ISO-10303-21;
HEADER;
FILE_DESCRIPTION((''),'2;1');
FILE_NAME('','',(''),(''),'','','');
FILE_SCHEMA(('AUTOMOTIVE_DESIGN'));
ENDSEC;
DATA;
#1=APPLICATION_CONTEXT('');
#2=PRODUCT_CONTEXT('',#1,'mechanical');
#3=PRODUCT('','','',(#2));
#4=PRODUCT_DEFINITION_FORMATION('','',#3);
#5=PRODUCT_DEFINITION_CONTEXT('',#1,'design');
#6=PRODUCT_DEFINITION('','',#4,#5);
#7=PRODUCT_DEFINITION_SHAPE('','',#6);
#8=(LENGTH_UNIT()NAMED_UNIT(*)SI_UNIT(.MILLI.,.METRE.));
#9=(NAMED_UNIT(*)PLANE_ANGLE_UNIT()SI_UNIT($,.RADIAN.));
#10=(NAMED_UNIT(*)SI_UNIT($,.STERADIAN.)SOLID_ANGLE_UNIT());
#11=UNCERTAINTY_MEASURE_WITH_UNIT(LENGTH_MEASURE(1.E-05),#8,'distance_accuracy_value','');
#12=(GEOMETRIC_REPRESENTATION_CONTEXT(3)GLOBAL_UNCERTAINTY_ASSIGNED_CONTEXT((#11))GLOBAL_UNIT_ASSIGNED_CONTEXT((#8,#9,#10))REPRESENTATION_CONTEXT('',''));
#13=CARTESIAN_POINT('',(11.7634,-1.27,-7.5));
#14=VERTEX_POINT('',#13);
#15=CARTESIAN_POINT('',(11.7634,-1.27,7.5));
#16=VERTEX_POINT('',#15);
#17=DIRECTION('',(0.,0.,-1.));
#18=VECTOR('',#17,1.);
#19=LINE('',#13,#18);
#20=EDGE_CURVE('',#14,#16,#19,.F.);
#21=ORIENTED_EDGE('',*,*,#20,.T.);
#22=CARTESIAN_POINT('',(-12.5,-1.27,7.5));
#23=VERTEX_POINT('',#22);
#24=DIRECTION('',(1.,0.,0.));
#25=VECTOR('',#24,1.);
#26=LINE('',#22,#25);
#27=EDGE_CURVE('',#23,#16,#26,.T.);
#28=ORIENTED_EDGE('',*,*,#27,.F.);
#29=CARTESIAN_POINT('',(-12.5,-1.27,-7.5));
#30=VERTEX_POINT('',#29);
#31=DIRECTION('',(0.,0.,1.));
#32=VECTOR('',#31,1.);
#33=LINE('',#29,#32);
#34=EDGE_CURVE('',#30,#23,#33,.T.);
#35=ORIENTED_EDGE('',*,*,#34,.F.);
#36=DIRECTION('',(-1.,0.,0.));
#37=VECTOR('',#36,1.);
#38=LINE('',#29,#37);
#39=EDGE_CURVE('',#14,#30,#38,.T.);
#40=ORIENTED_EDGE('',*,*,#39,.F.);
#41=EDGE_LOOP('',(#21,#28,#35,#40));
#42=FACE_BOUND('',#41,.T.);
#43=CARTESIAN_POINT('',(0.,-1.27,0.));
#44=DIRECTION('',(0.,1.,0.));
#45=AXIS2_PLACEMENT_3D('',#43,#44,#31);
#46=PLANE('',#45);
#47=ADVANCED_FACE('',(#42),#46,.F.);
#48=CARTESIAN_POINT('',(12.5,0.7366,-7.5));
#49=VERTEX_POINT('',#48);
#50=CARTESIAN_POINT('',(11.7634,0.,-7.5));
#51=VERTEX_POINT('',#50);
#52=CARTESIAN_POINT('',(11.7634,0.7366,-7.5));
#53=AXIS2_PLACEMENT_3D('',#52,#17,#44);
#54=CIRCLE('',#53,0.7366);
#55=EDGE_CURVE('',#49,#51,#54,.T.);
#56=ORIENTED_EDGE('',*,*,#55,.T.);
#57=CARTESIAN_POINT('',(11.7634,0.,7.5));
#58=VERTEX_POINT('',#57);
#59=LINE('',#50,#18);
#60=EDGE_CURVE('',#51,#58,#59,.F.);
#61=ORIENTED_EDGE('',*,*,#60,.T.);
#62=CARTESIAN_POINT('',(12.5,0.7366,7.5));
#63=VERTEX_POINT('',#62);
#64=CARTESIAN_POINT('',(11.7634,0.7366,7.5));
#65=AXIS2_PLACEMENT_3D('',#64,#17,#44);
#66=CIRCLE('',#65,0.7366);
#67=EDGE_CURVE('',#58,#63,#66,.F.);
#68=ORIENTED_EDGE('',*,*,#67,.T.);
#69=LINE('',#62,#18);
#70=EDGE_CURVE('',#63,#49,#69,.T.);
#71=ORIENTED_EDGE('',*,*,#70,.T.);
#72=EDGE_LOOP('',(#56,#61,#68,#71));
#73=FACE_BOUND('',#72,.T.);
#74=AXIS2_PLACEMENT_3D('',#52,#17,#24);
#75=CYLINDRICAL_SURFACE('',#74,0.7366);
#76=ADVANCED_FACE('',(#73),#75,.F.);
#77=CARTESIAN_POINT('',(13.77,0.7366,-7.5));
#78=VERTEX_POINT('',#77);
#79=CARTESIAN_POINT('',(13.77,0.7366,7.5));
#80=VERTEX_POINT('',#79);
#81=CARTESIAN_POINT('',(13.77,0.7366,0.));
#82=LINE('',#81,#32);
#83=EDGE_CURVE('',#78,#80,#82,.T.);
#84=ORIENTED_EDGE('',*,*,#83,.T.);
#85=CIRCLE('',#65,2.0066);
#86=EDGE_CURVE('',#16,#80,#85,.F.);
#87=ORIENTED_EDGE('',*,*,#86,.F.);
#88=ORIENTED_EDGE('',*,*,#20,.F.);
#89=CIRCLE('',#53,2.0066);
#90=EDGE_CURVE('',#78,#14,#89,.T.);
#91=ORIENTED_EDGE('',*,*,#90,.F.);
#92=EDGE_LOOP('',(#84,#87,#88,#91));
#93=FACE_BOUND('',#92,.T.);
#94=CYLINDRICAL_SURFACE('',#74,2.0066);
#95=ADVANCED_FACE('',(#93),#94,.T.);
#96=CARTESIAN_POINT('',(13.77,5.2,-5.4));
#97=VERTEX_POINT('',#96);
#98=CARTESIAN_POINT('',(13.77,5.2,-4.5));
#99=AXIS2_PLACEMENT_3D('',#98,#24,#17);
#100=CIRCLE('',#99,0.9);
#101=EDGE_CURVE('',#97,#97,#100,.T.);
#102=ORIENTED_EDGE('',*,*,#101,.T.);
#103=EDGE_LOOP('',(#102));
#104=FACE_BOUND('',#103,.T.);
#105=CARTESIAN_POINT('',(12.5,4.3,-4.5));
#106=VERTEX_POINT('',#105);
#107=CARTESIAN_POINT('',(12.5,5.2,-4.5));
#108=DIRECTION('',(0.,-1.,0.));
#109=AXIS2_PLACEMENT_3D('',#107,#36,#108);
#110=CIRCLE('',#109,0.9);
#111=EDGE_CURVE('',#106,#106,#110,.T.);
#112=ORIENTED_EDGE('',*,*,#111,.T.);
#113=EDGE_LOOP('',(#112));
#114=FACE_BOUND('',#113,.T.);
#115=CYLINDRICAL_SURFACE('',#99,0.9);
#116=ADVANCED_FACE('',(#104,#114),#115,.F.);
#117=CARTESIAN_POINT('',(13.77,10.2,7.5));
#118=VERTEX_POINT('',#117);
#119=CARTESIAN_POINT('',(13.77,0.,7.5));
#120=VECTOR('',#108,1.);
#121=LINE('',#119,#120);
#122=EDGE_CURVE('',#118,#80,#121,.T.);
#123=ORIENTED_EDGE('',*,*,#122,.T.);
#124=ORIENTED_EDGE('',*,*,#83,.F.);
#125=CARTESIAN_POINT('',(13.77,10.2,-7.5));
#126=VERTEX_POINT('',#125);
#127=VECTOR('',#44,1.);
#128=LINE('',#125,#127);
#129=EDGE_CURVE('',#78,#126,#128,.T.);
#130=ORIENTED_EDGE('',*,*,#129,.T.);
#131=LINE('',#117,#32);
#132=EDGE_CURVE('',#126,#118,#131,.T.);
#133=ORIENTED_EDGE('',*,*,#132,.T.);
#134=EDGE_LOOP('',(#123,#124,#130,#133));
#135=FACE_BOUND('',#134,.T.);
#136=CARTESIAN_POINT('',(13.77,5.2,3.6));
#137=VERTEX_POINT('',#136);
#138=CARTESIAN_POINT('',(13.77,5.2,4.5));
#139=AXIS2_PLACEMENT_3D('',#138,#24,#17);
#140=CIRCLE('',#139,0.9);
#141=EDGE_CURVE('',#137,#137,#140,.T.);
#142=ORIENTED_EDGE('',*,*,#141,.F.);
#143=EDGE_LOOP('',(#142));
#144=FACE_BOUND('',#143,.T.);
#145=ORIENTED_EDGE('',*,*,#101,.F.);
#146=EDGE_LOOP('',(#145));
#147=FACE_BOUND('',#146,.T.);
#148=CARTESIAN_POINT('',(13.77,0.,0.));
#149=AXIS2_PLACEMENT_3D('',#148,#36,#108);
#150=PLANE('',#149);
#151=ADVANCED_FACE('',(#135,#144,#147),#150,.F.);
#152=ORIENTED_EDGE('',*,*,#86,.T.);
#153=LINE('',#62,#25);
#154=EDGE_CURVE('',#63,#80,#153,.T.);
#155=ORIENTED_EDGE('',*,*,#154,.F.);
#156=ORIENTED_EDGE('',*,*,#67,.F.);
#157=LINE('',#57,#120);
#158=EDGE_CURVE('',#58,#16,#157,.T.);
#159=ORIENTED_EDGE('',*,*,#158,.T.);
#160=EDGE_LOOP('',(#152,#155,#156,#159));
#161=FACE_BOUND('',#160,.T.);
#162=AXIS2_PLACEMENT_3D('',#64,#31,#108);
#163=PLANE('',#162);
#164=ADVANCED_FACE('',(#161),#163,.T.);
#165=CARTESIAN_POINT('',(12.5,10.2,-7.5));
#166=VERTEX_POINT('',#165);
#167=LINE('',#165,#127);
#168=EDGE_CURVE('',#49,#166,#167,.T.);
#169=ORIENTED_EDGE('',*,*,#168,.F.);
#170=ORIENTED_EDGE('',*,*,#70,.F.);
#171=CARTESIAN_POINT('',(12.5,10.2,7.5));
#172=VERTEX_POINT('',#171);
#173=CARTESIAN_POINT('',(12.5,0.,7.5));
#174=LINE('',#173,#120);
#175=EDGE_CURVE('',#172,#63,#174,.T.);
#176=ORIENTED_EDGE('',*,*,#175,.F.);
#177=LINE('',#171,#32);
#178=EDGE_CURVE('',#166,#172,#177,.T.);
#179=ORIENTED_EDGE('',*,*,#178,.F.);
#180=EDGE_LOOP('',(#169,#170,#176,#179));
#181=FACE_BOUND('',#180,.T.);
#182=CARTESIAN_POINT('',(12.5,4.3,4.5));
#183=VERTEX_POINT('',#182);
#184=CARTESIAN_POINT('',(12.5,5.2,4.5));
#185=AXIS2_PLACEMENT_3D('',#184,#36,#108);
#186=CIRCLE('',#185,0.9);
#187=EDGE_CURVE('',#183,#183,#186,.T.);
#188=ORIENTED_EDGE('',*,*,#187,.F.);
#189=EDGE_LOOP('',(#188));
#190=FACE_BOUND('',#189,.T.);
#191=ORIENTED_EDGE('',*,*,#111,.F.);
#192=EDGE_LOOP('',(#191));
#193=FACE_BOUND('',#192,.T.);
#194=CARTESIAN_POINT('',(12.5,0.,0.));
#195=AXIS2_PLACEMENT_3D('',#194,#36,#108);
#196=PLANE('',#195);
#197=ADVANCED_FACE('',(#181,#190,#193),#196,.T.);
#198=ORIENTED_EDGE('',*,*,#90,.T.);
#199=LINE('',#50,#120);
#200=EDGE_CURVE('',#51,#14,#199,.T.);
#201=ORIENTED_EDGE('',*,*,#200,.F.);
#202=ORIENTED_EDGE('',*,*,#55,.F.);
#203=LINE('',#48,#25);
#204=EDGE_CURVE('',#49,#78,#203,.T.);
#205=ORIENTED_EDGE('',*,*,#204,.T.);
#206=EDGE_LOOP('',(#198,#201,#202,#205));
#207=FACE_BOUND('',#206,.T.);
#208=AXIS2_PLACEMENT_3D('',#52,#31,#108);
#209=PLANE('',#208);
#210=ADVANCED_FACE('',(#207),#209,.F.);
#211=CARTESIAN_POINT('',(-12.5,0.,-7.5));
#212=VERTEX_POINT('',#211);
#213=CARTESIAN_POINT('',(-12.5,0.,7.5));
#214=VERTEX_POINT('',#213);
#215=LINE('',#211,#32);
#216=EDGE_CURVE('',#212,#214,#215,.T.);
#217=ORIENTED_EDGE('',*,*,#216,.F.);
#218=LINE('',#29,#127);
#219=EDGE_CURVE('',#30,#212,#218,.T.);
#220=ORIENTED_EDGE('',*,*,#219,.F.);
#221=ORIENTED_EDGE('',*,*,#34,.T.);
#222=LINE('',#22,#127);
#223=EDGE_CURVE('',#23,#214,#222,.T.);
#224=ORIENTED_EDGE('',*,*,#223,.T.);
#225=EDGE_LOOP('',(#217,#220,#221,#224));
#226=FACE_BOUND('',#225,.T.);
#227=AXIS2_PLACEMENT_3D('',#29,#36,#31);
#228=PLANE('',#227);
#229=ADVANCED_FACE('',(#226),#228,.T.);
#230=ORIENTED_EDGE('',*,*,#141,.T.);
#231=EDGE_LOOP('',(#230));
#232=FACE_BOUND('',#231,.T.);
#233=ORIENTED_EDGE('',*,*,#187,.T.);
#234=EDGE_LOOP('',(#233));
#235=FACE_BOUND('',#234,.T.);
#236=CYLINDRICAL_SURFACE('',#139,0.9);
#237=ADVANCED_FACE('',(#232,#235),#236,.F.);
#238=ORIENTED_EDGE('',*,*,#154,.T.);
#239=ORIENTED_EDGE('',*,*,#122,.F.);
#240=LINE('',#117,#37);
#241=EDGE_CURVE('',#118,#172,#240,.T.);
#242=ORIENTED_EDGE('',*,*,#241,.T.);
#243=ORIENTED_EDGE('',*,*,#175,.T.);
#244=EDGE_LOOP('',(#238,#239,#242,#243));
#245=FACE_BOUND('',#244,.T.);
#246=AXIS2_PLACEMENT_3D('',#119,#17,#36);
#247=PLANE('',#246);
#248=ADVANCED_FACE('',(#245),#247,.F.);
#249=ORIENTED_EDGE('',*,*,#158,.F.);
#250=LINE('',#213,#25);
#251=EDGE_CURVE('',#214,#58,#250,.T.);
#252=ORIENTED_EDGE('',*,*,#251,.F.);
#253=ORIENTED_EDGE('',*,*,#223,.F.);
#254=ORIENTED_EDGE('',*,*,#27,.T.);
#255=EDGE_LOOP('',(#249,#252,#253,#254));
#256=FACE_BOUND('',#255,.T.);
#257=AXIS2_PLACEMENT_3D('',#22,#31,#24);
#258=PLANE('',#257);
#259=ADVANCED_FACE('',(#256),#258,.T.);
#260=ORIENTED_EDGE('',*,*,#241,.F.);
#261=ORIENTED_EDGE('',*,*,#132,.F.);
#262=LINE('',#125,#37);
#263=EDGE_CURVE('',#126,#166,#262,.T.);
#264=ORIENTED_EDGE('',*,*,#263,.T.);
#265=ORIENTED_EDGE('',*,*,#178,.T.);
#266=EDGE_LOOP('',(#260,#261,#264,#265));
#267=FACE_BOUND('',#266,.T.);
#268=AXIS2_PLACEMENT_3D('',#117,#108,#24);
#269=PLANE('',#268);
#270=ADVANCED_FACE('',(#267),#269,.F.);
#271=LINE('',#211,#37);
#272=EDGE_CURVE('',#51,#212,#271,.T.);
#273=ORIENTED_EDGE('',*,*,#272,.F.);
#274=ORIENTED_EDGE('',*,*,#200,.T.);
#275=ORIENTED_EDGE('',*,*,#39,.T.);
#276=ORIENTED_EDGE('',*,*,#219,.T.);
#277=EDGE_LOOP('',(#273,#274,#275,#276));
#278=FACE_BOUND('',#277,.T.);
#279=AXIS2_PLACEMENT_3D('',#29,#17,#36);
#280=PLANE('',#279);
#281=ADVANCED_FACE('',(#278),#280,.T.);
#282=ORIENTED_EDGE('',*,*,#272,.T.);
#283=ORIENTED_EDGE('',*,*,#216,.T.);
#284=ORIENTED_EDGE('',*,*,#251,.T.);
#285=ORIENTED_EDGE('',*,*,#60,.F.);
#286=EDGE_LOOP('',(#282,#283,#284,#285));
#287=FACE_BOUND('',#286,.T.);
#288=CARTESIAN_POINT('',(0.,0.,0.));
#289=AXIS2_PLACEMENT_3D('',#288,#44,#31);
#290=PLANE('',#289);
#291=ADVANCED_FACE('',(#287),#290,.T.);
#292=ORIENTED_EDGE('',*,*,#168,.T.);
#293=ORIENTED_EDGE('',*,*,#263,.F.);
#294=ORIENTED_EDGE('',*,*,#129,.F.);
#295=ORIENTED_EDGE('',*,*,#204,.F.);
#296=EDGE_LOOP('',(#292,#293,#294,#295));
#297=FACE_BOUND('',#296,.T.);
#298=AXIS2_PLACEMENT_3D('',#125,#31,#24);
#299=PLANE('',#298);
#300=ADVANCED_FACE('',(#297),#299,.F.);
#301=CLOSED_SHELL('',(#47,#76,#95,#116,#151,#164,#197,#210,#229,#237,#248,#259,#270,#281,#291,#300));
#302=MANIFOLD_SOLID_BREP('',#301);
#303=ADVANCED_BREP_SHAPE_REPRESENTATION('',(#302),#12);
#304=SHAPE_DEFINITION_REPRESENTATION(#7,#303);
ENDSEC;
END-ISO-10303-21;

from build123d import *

# Parameters (mm, degrees)
SKETCH1_W                    = 25
SKETCH1_H                    = 15
BASE_FLANGE1_DEPTH           = 1.27
EDGE_FLANGE1_STRIP_W         = 6.5532
EDGE_FLANGE1_STRIP_H         = 1.27
EDGE_FLANGE1_STRIP_CUT_DEPTH = 15
EDGE_FLANGE1_DEPTH           = 15
M1_6_CLEARANCE_HOLE1_D       = 1.8


# Sheet-metal steps are written as plain solids
with BuildPart() as part:
    # Sketch1 → Base-Flange1 (new body)
    with BuildSketch(Plane(origin=(0, 0, 0), x_dir=(1, 0, 0), z_dir=(0, 1, 0))):
        Rectangle(SKETCH1_W, SKETCH1_H)
    extrude(amount=-BASE_FLANGE1_DEPTH)

    # Edge-Flange1 strip (across the edge) → Edge-Flange1 strip cut (cut)
    with BuildSketch(Plane(origin=(12.5, 0, 7.5), x_dir=(-1, 0, 0), z_dir=(0, 0, -1))):
        with Locations((-2.54, -0.635)):
            Rectangle(EDGE_FLANGE1_STRIP_W, EDGE_FLANGE1_STRIP_H)
    extrude(amount=EDGE_FLANGE1_STRIP_CUT_DEPTH, mode=Mode.SUBTRACT)

    # Edge-Flange1 section (across the edge) → Edge-Flange1 (add)
    with BuildSketch(Plane(origin=(12.5, 0, 7.5), x_dir=(-1, 0, 0), z_dir=(0, 0, -1))):
        with BuildLine():
            Line((-1.27, 0.7366), (-1.27, 10.2))
            Line((-1.27, 10.2), (0, 10.2))
            Line((0, 10.2), (0, 0.7366))
            ThreePointArc((0, 0.7366), (0.215745145, 0.215745145), (0.7366, 0))
            Line((0.7366, 0), (0.7366, -1.27))
            ThreePointArc((0.7366, -1.27), (-0.682280467, -0.682280467), (-1.27, 0.7366))
        make_face()
    extrude(amount=EDGE_FLANGE1_DEPTH)

    # M1.6 Clearance Hole1 (through all)
    with Locations(Plane(origin=(13.77, 5.2, 4.5), x_dir=(0, 1, 0), z_dir=(1, 0, 0))):
        with Locations((0, 0), (0, -9)):
            Hole(M1_6_CLEARANCE_HOLE1_D / 2)


solid = part.part
